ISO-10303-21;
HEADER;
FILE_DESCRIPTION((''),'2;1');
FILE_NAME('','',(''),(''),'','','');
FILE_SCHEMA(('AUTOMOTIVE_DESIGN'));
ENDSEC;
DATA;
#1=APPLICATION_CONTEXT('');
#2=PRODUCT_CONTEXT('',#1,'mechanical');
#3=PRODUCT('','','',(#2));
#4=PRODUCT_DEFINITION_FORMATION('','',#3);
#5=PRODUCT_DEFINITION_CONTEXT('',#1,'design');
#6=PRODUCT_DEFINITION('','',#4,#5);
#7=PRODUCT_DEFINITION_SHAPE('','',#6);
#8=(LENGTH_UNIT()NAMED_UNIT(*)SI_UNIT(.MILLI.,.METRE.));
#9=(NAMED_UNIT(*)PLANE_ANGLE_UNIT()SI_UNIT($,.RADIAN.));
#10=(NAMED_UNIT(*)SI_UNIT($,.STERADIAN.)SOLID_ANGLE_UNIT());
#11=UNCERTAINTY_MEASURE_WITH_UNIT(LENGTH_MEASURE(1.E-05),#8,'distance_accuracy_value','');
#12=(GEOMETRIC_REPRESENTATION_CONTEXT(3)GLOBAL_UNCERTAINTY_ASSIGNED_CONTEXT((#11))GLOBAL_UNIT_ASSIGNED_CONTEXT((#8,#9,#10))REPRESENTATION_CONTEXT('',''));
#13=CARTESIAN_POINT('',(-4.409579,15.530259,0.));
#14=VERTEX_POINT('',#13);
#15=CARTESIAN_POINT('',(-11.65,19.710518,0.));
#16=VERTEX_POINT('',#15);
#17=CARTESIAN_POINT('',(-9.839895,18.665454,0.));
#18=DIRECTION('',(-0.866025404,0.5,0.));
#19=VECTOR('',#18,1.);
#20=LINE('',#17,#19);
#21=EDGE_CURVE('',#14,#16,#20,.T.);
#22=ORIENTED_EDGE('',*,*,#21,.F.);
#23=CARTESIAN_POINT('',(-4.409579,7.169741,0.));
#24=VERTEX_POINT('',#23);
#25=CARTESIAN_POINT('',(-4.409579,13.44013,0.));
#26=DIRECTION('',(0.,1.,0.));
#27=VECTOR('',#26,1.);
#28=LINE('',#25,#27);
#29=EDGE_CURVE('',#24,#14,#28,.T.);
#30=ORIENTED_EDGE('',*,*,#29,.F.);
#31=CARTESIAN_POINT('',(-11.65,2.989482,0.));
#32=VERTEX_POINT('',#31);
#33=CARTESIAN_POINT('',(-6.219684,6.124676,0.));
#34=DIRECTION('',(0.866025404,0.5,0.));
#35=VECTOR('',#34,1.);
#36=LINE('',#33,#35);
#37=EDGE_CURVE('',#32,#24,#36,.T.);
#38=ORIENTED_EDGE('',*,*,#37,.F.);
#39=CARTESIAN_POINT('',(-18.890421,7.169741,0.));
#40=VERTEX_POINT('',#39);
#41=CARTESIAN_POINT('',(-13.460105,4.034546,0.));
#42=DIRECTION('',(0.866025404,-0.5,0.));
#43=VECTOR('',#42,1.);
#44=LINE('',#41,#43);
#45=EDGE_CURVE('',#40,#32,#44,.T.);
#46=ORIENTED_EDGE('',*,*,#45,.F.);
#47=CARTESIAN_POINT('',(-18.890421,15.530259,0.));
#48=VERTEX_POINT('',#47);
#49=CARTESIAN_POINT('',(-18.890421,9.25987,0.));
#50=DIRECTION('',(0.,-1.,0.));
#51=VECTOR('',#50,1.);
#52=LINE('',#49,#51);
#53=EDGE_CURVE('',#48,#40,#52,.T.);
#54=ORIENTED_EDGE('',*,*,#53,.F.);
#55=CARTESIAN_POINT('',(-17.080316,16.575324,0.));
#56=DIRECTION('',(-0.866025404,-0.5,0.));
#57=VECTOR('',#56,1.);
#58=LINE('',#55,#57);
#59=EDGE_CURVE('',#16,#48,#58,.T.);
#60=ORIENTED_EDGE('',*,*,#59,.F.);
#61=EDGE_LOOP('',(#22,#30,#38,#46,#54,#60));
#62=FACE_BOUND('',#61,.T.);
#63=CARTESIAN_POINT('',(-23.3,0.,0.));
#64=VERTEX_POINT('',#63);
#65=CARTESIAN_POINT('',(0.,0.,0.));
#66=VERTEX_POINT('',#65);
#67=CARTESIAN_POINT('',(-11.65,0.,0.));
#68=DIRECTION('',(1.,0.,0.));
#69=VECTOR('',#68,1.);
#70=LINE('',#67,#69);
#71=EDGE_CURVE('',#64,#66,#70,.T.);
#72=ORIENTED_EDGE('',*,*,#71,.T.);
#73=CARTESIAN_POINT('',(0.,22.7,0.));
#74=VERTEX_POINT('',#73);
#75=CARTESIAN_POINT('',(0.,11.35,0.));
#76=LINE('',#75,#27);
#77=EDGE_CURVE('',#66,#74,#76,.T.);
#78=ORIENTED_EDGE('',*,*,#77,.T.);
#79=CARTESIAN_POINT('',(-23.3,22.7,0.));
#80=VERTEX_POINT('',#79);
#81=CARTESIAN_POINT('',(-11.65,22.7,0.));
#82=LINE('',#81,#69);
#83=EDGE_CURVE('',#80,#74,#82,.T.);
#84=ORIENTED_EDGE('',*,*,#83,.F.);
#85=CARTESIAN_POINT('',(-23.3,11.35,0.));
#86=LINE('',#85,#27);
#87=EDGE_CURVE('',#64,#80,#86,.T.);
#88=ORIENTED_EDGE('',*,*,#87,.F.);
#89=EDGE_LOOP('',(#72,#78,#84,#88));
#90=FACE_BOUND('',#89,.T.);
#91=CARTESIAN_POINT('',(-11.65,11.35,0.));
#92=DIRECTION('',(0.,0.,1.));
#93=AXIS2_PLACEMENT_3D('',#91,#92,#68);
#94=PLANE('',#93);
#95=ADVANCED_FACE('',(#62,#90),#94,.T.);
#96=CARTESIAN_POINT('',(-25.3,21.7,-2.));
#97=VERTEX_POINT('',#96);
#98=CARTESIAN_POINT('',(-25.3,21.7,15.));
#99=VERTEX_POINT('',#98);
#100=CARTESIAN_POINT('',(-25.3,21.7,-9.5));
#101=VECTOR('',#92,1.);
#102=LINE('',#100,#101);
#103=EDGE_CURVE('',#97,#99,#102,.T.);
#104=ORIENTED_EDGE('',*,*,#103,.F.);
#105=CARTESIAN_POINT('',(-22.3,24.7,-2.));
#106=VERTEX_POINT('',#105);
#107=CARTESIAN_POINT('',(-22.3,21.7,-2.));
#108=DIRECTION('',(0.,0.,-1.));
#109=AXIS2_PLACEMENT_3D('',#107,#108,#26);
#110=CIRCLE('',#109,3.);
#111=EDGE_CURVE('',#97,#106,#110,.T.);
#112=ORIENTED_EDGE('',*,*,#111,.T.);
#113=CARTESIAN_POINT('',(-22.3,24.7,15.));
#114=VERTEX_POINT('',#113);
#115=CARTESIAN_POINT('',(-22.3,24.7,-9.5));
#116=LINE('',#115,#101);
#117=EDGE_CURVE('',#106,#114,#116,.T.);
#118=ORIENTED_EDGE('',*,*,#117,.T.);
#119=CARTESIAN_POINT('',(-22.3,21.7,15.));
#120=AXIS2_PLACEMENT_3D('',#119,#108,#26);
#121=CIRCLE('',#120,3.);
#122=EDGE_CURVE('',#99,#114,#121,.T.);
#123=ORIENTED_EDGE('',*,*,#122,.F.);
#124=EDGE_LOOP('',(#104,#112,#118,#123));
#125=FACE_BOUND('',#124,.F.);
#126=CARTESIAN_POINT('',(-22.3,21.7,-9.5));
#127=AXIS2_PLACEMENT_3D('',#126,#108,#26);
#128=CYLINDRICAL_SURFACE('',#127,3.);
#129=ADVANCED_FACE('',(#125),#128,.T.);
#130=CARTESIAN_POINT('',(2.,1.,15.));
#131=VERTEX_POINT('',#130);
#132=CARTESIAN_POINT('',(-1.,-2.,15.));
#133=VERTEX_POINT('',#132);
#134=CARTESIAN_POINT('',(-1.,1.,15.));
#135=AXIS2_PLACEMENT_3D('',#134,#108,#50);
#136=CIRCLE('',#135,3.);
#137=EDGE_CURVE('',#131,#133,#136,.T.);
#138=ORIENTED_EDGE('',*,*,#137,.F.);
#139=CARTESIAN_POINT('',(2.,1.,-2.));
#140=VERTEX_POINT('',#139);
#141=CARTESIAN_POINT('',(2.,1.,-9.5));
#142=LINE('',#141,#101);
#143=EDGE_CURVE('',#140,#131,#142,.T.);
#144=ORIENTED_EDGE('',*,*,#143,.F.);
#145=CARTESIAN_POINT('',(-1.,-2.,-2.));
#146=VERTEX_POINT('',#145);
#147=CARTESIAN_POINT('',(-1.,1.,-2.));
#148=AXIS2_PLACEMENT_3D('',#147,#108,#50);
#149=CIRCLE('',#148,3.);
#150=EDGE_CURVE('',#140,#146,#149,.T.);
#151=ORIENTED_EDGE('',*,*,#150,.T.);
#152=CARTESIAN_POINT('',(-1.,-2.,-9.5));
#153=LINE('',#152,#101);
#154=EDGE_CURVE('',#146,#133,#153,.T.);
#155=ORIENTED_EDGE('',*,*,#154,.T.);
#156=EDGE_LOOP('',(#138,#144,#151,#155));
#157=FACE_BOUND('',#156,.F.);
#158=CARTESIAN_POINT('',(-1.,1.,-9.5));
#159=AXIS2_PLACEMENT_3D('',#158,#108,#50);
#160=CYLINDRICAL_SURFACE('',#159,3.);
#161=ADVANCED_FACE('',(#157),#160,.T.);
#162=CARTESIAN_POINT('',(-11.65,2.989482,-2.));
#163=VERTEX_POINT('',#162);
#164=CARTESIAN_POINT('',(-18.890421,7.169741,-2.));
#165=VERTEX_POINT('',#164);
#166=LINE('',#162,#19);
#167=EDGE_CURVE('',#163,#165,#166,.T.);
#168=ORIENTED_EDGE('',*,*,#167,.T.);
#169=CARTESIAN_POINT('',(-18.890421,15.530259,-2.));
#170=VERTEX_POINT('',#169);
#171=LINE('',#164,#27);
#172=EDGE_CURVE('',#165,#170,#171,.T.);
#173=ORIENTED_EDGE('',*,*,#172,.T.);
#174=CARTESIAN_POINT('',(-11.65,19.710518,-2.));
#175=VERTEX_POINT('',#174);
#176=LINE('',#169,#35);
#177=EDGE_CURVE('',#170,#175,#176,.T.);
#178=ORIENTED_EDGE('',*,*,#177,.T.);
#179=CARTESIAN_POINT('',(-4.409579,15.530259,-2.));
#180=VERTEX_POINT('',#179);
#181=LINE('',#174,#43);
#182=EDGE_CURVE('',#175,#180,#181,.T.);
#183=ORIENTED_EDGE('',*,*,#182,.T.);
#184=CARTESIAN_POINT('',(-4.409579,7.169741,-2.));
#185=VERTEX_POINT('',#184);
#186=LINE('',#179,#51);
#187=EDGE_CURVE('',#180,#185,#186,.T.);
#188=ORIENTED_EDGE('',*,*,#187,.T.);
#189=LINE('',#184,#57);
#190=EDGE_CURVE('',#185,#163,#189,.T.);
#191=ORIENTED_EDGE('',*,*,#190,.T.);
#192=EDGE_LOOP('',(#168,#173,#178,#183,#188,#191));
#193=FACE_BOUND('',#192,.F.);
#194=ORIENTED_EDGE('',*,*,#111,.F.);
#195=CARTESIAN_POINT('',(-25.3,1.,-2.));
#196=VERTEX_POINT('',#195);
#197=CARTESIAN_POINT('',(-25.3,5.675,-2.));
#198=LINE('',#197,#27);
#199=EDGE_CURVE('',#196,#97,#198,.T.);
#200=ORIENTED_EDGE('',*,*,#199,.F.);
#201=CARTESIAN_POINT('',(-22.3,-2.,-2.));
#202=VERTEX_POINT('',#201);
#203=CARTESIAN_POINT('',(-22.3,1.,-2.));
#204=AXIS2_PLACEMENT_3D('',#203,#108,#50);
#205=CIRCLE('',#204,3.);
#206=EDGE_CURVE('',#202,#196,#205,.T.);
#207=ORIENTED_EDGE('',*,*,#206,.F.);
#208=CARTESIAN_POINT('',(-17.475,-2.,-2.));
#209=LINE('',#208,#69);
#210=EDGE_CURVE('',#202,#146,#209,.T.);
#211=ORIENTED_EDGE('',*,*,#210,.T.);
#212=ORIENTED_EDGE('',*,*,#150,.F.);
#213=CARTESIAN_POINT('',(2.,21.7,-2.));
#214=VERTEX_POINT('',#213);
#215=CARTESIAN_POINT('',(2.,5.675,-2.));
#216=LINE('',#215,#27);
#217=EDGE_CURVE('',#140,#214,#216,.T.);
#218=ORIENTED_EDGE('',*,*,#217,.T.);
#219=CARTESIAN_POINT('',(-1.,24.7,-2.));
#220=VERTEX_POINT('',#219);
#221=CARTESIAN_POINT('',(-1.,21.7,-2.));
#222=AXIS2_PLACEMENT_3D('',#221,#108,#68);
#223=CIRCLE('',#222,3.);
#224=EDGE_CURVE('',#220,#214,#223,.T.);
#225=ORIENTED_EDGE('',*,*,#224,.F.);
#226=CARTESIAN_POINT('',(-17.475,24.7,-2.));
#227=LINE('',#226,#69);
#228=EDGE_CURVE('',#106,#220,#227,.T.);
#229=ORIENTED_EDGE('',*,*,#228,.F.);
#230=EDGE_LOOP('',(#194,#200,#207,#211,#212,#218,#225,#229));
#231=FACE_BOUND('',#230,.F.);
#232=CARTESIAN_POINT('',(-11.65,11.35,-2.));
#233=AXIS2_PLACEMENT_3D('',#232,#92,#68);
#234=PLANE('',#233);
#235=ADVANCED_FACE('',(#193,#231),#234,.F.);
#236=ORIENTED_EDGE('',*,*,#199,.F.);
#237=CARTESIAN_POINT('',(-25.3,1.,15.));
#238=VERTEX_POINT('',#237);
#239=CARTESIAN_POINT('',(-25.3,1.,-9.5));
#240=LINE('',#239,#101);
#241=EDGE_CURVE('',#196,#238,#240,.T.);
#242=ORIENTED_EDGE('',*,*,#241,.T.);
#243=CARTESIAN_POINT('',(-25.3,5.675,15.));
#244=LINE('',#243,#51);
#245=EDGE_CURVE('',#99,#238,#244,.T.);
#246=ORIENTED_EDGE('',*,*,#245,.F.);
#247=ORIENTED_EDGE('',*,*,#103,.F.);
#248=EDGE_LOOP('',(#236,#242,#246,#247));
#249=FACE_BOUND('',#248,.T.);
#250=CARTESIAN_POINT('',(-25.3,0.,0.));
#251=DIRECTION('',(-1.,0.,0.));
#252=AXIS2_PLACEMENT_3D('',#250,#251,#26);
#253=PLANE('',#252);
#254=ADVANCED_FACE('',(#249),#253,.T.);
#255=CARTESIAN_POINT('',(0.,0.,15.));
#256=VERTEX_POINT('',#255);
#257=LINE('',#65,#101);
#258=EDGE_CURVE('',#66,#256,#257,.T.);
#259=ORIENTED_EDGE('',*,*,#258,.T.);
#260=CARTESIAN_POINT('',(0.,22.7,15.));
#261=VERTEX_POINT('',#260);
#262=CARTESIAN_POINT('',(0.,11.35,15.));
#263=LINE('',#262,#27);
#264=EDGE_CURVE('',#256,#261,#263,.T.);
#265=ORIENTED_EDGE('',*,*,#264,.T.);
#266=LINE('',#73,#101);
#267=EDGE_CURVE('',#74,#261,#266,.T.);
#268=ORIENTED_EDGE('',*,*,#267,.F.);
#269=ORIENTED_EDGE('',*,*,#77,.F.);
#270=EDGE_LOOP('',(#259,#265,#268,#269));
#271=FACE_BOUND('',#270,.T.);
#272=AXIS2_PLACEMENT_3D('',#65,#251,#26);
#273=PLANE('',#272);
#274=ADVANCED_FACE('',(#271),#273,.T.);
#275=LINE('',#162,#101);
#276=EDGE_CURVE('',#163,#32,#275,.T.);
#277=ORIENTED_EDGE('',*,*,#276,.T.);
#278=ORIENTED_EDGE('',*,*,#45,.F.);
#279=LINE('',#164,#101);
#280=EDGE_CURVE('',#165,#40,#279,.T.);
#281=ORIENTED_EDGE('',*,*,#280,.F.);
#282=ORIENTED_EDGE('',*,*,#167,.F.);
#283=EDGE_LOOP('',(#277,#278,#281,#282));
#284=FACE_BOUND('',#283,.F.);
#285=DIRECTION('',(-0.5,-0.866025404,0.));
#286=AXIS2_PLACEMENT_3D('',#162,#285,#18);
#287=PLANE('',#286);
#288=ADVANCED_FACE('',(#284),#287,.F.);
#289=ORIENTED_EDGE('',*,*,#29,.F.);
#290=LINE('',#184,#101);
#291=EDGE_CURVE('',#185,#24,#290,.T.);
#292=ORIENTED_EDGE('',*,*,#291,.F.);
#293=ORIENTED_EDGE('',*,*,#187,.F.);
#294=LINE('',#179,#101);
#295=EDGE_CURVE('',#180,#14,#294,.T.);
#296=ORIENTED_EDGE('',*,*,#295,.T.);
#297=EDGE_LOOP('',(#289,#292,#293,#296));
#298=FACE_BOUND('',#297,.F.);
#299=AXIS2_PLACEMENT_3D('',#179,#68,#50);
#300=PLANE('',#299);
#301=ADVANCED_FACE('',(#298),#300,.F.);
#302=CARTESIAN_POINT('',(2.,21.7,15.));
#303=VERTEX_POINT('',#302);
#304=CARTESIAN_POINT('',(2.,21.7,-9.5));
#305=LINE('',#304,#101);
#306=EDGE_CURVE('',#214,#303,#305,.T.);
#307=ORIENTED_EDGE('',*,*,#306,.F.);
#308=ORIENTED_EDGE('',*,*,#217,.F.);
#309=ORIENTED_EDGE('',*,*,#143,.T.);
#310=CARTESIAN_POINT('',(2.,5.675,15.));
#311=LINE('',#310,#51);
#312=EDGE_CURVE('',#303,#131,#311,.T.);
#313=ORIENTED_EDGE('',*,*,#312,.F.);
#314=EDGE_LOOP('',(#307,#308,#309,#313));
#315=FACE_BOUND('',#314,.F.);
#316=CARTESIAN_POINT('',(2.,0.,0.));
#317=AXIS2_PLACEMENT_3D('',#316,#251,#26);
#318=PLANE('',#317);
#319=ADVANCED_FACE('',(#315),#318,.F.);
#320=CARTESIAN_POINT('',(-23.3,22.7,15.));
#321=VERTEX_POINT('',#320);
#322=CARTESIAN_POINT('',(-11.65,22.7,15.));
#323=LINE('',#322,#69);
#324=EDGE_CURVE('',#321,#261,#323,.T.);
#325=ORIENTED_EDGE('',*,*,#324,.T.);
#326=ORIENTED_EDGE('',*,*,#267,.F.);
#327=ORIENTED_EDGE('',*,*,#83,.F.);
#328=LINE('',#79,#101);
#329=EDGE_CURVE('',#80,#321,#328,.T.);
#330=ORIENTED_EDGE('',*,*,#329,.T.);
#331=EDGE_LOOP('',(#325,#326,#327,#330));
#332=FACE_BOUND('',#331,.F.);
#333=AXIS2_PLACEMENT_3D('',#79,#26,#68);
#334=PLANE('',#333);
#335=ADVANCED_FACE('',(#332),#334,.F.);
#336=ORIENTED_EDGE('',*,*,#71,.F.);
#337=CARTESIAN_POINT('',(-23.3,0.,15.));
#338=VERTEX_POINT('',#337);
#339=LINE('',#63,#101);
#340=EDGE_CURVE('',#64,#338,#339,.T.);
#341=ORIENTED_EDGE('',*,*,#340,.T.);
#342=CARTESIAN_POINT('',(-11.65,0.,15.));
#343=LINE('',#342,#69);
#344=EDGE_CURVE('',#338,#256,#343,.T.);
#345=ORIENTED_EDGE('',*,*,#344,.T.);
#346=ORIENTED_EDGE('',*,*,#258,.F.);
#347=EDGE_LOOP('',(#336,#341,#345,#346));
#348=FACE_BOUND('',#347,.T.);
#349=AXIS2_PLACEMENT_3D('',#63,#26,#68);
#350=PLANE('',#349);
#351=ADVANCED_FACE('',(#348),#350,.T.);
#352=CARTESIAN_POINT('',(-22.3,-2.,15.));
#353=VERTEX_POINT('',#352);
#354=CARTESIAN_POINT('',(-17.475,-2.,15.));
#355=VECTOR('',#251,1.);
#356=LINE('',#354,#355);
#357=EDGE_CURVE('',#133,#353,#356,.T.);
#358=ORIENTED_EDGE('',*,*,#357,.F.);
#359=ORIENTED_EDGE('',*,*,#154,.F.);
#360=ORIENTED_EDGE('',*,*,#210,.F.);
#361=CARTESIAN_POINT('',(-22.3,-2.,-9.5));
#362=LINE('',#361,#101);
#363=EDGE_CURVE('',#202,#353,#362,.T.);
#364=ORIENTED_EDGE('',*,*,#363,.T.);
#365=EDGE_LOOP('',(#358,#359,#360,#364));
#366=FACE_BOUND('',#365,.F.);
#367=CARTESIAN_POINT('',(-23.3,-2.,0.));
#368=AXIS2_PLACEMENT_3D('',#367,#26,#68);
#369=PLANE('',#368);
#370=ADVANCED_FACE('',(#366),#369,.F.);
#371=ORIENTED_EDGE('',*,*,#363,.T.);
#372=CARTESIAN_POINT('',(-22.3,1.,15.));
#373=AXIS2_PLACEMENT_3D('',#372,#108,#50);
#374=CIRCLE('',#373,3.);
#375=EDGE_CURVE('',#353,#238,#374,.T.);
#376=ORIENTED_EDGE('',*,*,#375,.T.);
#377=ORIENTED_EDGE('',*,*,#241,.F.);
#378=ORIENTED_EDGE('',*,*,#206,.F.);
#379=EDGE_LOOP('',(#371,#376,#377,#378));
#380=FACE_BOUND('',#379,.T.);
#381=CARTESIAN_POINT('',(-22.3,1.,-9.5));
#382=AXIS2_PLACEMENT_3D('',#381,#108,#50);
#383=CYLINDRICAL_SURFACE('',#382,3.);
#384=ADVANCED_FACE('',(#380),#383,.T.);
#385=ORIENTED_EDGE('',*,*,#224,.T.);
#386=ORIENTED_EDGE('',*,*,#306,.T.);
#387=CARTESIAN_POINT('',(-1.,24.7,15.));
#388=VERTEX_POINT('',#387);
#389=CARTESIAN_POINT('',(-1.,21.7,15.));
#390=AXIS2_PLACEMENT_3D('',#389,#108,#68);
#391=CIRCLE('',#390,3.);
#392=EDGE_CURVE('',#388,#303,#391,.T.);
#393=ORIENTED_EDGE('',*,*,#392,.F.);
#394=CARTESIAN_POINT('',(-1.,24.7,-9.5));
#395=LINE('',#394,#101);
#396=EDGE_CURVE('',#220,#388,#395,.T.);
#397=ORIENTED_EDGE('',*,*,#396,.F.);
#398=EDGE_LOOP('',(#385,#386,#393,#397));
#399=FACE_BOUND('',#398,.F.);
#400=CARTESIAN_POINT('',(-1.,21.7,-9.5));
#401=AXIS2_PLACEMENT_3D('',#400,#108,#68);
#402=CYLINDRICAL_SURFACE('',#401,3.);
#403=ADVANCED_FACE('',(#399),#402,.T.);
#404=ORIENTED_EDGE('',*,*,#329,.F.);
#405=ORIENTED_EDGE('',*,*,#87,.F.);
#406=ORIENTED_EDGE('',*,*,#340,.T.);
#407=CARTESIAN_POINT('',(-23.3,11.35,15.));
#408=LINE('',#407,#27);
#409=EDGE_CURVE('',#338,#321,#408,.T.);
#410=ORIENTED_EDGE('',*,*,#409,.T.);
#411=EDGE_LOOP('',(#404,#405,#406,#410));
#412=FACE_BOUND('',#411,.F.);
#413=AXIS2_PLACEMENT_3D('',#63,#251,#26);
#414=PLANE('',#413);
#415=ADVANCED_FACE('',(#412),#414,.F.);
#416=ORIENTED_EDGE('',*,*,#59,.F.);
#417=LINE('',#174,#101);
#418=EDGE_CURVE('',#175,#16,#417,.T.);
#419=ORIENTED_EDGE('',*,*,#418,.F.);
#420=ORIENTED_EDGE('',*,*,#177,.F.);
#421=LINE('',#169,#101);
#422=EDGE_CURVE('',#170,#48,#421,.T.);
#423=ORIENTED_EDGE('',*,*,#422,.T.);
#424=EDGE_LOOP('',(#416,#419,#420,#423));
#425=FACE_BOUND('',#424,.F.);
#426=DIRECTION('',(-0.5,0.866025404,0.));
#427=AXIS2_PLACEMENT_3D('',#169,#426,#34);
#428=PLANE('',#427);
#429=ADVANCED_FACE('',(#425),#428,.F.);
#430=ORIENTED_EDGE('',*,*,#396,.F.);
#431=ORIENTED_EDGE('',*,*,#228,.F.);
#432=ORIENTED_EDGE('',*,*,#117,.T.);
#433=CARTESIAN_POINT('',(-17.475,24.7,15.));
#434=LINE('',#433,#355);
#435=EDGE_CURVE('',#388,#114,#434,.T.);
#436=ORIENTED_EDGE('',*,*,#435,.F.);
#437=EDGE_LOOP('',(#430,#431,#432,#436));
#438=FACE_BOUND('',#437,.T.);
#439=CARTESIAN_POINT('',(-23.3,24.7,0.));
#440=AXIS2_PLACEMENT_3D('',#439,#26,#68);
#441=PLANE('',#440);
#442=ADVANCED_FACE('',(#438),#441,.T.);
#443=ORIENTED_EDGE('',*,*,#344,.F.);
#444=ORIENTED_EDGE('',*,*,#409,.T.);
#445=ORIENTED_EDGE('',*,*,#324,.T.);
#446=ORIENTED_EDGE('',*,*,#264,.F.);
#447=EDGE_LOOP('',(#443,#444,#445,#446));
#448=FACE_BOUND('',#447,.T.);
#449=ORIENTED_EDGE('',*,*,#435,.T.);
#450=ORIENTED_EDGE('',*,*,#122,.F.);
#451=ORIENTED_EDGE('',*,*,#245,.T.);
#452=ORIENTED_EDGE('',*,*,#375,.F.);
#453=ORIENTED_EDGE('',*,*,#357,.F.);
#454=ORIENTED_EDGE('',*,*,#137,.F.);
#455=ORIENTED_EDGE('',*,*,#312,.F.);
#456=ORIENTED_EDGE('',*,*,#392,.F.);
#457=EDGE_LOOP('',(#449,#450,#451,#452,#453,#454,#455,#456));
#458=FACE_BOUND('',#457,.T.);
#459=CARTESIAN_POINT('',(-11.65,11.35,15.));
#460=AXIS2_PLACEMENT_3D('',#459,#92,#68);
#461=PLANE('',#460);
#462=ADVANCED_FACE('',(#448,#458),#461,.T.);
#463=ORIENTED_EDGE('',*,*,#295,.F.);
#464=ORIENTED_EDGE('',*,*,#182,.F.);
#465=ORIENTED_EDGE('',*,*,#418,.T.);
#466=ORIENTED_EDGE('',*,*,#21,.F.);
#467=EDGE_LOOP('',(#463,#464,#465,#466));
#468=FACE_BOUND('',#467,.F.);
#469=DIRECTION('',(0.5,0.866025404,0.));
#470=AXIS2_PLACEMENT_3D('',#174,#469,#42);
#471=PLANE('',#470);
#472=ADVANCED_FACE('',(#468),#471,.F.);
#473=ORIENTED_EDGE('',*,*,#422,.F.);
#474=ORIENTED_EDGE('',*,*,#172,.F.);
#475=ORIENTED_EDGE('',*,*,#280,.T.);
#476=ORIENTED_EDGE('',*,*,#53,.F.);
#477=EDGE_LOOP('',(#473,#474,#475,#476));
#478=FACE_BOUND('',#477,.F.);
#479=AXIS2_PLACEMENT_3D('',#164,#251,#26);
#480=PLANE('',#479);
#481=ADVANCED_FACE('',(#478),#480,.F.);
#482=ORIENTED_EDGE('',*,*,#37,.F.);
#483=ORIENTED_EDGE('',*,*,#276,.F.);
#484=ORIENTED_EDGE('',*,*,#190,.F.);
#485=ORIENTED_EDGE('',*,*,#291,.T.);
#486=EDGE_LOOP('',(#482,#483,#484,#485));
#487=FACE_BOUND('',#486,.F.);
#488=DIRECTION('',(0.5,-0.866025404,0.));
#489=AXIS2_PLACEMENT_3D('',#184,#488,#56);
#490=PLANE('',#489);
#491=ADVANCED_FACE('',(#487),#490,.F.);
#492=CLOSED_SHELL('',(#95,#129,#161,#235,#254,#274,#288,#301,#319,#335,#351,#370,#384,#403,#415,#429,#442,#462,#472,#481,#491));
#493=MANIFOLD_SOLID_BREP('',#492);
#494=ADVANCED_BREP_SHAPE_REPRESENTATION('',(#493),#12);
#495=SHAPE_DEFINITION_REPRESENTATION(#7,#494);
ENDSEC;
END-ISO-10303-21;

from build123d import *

# Parameters (mm, degrees)
F0_W        = 23.3
F0_H        = 22.7
F1_DEPTH    = 15
F2_T        = 2
F3_T1_DEPTH = 32
F5_DEPTH    = 25


# Not quite as in the source:
# - a fillet or chamfer that OpenCascade refuses, or shapes differently, is made with other operations: its cross-section is extruded or revolved along the edge and cut away or added


with BuildPart() as f1:
    # F0 (on Top) → F1 (new body)
    with BuildSketch(Plane.XY):
        with Locations((-11.65, 11.35)):
            Rectangle(F0_W, F0_H)
    extrude(amount=F1_DEPTH)

    # F2
    f2_openings = [f1.faces().sort_by_distance(p)[0] for p in [
        (-11.65, 11.35, 15),
    ]]
    offset(amount=F2_T, openings=f2_openings, kind=Kind.INTERSECTION)

    # F3: fillet of radius 3 on 4 edges, made by hand

    # F3_s2 → F3_t1 (cut)
    with BuildSketch(Plane.XY.offset(-9.5)):
        with BuildLine():
            ThreePointArc((-22.3, -2), (-24.4213203436, -1.1213203436), (-25.3, 1))
            Line((-25.3, 1), (-25.3, -2))
            Line((-25.3, -2), (-22.3, -2))
        make_face()
        with BuildLine():
            ThreePointArc((-1, -2), (1.1213203436, -1.1213203436), (2, 1))
            Line((2, 1), (2, -2))
            Line((2, -2), (-1, -2))
        make_face()
        with BuildLine():
            ThreePointArc((2, 21.7), (1.1213203436, 23.8213203436), (-1, 24.7))
            Line((-1, 24.7), (2, 24.7))
            Line((2, 24.7), (2, 21.7))
        make_face()
        with BuildLine():
            ThreePointArc((-22.3, 24.7), (-24.4213203436, 23.8213203436), (-25.3, 21.7))
            Line((-25.3, 21.7), (-25.3, 24.7))
            Line((-25.3, 24.7), (-22.3, 24.7))
        make_face()
    extrude(amount=F3_T1_DEPTH, mode=Mode.SUBTRACT)

    # F4 (on face) → F5 (cut)
    with BuildSketch(Plane(origin=(0, 0, -2), x_dir=(1, 0, 0), z_dir=(0, 0, -1))):
        Polygon((-18.8904213403, -15.5302592099), (-11.65, -19.7105184197), (-4.4095786597, -15.5302592099), (-4.4095786597, -7.1697407901), (-11.65, -2.9894815803), (-18.8904213403, -7.1697407901), align=None)
    extrude(amount=-F5_DEPTH, mode=Mode.SUBTRACT)


solid = f1.part
